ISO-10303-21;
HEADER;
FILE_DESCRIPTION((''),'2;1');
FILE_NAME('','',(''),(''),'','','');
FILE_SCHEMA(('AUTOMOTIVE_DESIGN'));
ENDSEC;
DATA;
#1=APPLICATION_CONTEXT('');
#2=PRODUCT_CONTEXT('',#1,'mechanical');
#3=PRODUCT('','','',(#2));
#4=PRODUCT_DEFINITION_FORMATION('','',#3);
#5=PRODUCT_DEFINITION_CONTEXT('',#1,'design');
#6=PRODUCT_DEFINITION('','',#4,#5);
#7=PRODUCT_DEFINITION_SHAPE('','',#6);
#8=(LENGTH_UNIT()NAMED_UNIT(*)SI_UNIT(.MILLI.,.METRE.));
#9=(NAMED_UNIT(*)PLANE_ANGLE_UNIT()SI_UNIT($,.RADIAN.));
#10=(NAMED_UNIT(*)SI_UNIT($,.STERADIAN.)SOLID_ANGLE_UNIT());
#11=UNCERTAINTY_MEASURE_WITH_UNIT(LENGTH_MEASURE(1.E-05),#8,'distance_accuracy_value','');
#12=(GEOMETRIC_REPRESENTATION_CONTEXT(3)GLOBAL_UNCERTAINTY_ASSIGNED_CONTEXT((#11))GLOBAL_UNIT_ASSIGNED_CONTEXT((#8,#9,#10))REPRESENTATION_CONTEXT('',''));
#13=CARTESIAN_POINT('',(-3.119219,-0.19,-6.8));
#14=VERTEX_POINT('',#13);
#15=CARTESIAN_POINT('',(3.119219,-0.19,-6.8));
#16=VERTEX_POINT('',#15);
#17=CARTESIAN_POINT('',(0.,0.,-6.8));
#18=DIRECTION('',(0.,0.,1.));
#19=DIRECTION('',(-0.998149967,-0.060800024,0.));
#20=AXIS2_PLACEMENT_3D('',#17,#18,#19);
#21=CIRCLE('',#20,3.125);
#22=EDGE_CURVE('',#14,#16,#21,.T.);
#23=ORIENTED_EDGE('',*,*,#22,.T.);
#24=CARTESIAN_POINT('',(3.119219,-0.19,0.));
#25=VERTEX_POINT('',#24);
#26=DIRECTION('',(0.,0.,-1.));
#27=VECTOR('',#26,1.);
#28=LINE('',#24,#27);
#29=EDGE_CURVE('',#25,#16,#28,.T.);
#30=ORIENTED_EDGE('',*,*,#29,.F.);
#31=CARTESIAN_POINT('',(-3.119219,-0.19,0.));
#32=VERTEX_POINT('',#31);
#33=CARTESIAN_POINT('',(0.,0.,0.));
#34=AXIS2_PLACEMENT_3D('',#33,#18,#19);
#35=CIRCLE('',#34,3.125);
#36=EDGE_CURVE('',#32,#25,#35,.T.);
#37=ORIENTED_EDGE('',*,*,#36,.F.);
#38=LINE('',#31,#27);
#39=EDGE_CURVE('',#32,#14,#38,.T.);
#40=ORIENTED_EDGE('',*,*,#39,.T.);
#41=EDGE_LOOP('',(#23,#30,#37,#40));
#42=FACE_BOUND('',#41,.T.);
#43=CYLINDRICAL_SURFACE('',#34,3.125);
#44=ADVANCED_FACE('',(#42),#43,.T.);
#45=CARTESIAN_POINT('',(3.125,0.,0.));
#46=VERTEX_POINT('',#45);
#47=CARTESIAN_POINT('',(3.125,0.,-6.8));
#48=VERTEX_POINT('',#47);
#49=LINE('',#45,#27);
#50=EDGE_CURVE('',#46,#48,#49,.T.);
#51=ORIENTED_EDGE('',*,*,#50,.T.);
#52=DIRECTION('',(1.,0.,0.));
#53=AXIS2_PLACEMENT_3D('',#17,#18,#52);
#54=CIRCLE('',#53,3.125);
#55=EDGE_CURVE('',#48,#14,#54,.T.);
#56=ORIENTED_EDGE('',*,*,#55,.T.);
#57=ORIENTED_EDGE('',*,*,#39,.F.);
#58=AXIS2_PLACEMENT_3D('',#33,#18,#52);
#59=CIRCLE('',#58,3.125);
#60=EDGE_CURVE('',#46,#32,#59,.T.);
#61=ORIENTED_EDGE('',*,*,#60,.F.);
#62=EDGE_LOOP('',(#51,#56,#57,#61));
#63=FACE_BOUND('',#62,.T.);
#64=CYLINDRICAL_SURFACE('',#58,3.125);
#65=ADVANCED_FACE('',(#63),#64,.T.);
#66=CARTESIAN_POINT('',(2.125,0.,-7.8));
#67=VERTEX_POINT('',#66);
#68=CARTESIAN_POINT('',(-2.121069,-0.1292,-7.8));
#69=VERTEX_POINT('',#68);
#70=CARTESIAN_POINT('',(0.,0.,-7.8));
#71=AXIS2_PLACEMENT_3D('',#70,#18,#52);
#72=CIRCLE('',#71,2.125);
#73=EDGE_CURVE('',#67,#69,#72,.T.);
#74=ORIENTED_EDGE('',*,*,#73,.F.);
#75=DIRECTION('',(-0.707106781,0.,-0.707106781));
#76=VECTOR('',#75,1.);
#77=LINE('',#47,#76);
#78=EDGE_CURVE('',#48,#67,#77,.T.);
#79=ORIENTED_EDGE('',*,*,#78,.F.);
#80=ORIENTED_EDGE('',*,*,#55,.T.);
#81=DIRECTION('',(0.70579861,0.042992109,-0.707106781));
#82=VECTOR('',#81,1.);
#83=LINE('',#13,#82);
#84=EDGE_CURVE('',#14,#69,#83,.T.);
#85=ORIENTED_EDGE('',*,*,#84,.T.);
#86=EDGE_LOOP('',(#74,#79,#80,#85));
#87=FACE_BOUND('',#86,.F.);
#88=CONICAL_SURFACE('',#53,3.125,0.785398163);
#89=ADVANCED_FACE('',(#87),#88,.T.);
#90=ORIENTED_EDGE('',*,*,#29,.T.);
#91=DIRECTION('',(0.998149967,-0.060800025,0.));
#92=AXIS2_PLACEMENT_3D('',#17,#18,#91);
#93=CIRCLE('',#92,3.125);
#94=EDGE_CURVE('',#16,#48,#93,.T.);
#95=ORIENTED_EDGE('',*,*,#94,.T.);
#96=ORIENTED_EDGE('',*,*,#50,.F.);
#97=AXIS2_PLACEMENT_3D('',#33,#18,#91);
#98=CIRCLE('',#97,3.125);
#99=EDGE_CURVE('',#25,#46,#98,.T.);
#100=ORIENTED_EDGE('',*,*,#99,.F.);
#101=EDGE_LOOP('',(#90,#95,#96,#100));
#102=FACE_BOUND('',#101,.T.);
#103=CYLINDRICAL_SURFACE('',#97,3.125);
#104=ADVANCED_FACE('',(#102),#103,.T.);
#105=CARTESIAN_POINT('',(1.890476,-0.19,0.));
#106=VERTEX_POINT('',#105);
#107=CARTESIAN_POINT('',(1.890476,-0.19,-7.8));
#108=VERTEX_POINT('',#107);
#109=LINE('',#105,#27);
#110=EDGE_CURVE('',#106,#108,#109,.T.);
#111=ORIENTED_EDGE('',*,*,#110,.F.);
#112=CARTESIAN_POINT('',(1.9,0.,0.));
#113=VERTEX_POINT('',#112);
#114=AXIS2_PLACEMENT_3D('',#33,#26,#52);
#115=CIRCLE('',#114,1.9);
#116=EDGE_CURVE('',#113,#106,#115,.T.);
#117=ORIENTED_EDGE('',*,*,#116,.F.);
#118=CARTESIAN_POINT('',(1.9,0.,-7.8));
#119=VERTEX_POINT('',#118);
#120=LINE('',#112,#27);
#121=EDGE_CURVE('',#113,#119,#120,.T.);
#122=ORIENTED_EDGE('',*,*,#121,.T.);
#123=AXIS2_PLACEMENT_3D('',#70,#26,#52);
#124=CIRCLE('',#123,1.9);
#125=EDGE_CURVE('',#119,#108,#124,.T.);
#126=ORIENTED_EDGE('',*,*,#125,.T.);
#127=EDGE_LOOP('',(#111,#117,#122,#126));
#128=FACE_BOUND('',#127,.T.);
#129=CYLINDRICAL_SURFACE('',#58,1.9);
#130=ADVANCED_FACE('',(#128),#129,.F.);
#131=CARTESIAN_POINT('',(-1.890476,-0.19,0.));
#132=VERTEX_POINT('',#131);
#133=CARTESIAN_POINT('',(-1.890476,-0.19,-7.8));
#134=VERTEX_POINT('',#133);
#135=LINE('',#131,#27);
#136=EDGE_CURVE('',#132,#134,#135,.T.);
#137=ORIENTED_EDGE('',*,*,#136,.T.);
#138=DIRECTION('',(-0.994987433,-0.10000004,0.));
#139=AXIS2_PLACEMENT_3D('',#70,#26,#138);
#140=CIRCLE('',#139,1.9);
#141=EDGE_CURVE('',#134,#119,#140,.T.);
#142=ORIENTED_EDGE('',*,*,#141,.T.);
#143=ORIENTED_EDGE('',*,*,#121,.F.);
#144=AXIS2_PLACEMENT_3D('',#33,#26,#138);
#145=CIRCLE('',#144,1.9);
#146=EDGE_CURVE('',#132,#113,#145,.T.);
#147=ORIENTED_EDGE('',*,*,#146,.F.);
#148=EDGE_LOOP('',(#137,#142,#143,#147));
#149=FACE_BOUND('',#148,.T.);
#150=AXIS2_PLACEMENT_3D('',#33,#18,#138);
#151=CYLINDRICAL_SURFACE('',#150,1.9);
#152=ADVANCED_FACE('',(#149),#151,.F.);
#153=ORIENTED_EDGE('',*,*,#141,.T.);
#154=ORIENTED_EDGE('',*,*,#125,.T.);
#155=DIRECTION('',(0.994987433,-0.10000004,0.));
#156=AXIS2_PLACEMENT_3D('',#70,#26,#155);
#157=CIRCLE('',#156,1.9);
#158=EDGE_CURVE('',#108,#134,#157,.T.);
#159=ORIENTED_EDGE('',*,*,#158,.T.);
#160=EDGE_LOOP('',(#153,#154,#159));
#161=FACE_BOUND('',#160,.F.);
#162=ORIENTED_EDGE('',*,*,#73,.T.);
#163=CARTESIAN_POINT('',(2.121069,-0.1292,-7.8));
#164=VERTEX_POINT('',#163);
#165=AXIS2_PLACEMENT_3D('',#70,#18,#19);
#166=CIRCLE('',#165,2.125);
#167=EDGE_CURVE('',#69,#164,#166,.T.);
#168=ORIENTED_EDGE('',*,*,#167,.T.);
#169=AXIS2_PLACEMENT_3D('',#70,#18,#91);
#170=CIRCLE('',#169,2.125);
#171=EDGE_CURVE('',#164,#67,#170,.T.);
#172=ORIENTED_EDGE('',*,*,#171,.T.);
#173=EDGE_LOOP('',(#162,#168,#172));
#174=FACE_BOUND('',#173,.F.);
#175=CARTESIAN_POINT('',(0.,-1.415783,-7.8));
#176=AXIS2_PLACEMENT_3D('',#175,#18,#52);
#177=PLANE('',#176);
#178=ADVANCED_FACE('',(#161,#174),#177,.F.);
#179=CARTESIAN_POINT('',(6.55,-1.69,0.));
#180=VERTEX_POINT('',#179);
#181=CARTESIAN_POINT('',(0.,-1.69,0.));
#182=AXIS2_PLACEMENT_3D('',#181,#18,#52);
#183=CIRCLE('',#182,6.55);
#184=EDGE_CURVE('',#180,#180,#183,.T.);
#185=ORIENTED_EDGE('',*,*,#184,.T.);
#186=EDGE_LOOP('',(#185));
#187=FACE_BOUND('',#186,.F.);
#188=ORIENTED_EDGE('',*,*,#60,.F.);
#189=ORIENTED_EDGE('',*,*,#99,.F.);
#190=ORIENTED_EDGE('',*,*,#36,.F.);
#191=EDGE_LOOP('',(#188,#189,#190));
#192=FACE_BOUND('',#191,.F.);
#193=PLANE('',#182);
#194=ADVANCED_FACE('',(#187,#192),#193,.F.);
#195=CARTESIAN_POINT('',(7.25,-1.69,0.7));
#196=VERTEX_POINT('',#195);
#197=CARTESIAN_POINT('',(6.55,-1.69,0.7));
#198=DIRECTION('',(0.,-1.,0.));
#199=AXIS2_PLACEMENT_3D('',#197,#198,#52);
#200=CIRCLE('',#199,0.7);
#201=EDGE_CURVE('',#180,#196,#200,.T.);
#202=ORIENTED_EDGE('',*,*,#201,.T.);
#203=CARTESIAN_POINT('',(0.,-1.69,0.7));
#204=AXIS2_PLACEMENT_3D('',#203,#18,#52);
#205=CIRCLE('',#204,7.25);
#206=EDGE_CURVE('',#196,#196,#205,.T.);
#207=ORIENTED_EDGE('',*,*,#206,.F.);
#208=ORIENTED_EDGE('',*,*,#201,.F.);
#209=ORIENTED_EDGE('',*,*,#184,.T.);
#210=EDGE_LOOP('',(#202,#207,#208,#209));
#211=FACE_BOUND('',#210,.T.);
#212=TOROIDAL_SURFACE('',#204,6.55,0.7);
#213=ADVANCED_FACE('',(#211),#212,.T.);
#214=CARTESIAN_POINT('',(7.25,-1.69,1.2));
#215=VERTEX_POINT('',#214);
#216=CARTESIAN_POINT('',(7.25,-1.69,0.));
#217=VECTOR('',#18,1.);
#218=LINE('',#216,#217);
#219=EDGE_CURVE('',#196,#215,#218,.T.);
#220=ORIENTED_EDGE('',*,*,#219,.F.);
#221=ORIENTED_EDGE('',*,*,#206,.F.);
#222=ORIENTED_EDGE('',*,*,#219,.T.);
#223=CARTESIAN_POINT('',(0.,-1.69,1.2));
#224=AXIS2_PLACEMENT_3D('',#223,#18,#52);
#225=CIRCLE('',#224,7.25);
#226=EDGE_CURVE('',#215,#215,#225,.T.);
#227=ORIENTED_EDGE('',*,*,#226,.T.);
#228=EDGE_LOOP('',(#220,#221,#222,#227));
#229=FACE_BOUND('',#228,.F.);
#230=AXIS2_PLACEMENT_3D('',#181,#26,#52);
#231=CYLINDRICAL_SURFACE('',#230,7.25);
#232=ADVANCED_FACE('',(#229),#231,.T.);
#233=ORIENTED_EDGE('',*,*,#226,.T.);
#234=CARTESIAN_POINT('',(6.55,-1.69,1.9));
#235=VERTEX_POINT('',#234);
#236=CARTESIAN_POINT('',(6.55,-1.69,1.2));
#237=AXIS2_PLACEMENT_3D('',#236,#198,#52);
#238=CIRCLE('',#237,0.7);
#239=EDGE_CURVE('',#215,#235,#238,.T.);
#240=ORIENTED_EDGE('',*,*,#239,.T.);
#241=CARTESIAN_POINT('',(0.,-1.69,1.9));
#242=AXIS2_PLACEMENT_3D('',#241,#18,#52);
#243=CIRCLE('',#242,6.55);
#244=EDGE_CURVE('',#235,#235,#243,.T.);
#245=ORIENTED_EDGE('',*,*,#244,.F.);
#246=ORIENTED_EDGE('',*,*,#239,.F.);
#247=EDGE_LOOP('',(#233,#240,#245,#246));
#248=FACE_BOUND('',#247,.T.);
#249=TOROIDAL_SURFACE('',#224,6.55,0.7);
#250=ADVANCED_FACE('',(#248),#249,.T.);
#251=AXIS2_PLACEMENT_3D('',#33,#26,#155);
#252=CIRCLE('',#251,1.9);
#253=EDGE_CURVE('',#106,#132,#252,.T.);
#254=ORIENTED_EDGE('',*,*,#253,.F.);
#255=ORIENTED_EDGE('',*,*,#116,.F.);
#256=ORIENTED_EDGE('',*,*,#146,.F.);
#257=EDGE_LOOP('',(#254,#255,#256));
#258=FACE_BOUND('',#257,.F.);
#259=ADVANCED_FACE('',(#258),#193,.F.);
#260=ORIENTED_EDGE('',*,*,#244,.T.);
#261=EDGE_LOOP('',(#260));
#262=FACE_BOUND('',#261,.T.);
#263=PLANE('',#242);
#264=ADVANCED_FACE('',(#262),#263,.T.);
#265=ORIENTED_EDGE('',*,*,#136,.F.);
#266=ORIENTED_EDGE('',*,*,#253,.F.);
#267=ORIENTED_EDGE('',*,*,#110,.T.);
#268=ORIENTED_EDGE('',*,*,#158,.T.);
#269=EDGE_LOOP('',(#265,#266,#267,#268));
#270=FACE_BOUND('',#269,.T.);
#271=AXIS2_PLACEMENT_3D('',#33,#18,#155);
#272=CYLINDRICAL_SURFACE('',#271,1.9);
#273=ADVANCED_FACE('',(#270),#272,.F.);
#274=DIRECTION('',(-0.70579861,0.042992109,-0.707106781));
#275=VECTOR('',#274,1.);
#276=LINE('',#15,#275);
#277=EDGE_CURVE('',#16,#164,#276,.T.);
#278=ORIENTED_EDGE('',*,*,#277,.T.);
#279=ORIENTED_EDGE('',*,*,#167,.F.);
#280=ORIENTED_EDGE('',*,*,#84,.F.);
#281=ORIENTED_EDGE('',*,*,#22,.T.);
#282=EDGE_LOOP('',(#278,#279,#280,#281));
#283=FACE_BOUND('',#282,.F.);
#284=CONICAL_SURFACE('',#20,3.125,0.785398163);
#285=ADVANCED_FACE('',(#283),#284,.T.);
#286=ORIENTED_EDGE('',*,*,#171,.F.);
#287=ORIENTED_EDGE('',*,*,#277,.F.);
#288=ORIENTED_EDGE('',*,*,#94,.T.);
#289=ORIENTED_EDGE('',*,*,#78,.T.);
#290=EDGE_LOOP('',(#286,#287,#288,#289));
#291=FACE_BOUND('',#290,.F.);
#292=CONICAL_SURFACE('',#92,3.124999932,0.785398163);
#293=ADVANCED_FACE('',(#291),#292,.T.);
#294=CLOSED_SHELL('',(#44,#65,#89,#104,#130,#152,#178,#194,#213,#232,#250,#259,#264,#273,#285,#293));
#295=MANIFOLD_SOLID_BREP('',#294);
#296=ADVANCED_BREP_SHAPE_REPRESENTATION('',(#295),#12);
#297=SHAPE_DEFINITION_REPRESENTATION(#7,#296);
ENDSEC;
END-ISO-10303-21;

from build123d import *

# Parameters (mm, degrees)
F1_DEPTH = 7.8
F0_R     = 7.25
F2_DEPTH = 1.9
F3_SIZE  = 1
F4_R     = 0.7


# Not quite as in the source:
# - a feature names something its author has since deleted; it is built from what else it names


with BuildPart() as f1:
    # F0 (on Top) → F1 (new body)
    with BuildSketch(Plane.XY):
        with BuildLine():
            ThreePointArc((1.8904761229, -0.1900000758), (0, -1.9), (-1.8904761229, -0.1900000758))
            Line((-1.8904761229, -0.1900000758), (-3.1192186475, -0.1900000758))
            ThreePointArc((-3.1192186475, -0.1900000758), (0, -3.125), (3.1192186475, -0.1900000758))
            Line((3.1192186475, -0.1900000758), (1.8904761229, -0.1900000758))
        make_face()
        with BuildLine():
            ThreePointArc((-1.8904761229, -0.1900000758), (-0.0951193107, 1.897617537), (1.9, 0))
            ThreePointArc((1.9, 0), (1.897617537, -0.0951193107), (1.8904761229, -0.1900000758))
            Line((1.8904761229, -0.1900000758), (3.1192186475, -0.1900000758))
            ThreePointArc((3.1192186475, -0.1900000758), (3.1235543275, -0.0950440067), (3.125, 0))
            ThreePointArc((3.125, 0), (-0.0950440067, 3.1235543275), (-3.1192186475, -0.1900000758))
            Line((-3.1192186475, -0.1900000758), (-1.8904761229, -0.1900000758))
        make_face()
    extrude(amount=-F1_DEPTH)

    # F0 (on Top) → F2 (join)
    with BuildSketch(Plane.XY):
        with Locations((2.98e-08, -1.6900000758)):
            Circle(F0_R)
        Polygon((2.5797043927, -5.2021308802), (0, -7.9360147938), (-2.5797043927, -5.2021308802), align=None, mode=Mode.SUBTRACT)
        with BuildLine():
            Line((-5.4999999702, -0.1900000758), (-3.1192186475, -0.1900000758))
            ThreePointArc((-3.1192186475, -0.1900000758), (-0.0950440067, 3.1235543275), (3.125, 0))
            ThreePointArc((3.125, 0), (3.1235543275, -0.0950440067), (3.1192186475, -0.1900000758))
            Line((3.1192186475, -0.1900000758), (5.5000000298, -0.1900000758))
            Line((5.5000000298, -0.1900000758), (5.5000000298, -3.1900000758))
            Line((5.5000000298, -3.1900000758), (-5.4999999702, -3.1900000758))
            Line((-5.4999999702, -3.1900000758), (-5.4999999702, -0.1900000758))
        make_face(mode=Mode.SUBTRACT)
        with BuildLine():
            ThreePointArc((3.1192186475, -0.1900000758), (0, -3.125), (-3.1192186475, -0.1900000758))
            Line((-3.1192186475, -0.1900000758), (-5.4999999702, -0.1900000758))
            Line((-5.4999999702, -0.1900000758), (-5.4999999702, -3.1900000758))
            Line((-5.4999999702, -3.1900000758), (5.5000000298, -3.1900000758))
            Line((5.5000000298, -3.1900000758), (5.5000000298, -0.1900000758))
            Line((5.5000000298, -0.1900000758), (3.1192186475, -0.1900000758))
        make_face()
        with BuildLine():
            ThreePointArc((-1.8904761229, -0.1900000758), (-0.0951193107, 1.897617537), (1.9, 0))
            ThreePointArc((1.9, 0), (1.897617537, -0.0951193107), (1.8904761229, -0.1900000758))
            Line((1.8904761229, -0.1900000758), (3.1192186475, -0.1900000758))
            ThreePointArc((3.1192186475, -0.1900000758), (3.1235543275, -0.0950440067), (3.125, 0))
            ThreePointArc((3.125, 0), (-0.0950440067, 3.1235543275), (-3.1192186475, -0.1900000758))
            Line((-3.1192186475, -0.1900000758), (-1.8904761229, -0.1900000758))
        make_face()
        with BuildLine():
            ThreePointArc((1.8904761229, -0.1900000758), (0, -1.9), (-1.8904761229, -0.1900000758))
            Line((-1.8904761229, -0.1900000758), (-3.1192186475, -0.1900000758))
            ThreePointArc((-3.1192186475, -0.1900000758), (0, -3.125), (3.1192186475, -0.1900000758))
            Line((3.1192186475, -0.1900000758), (1.8904761229, -0.1900000758))
        make_face()
        Polygon((-2.5797043927, -5.2021308802), (0, -7.9360147938), (2.5797043927, -5.2021308802), align=None)
        with BuildLine():
            ThreePointArc((1.8904761229, -0.1900000758), (1.897617537, -0.0951193107), (1.9, 0))
            ThreePointArc((1.9, 0), (-0.0951193107, 1.897617537), (-1.8904761229, -0.1900000758))
            Line((-1.8904761229, -0.1900000758), (1.8904761229, -0.1900000758))
        make_face()
        with BuildLine():
            Line((1.8904761229, -0.1900000758), (-1.8904761229, -0.1900000758))
            ThreePointArc((-1.8904761229, -0.1900000758), (0, -1.9), (1.8904761229, -0.1900000758))
        make_face()
    extrude(amount=F2_DEPTH)

    # F3
    f3_edges = [f1.edges().sort_by_distance(p)[0] for p in [
        (3.119219, 0.19, -7.8),
    ]]
    chamfer(f3_edges, length=F3_SIZE)

    # F4
    f4_edges = [f1.edges().sort_by_distance(p)[0] for p in [
        (-7.25, -1.69, 0),
        (-7.25, -1.69, 1.9),
    ]]
    fillet(f4_edges, radius=F4_R)


solid = f1.part
